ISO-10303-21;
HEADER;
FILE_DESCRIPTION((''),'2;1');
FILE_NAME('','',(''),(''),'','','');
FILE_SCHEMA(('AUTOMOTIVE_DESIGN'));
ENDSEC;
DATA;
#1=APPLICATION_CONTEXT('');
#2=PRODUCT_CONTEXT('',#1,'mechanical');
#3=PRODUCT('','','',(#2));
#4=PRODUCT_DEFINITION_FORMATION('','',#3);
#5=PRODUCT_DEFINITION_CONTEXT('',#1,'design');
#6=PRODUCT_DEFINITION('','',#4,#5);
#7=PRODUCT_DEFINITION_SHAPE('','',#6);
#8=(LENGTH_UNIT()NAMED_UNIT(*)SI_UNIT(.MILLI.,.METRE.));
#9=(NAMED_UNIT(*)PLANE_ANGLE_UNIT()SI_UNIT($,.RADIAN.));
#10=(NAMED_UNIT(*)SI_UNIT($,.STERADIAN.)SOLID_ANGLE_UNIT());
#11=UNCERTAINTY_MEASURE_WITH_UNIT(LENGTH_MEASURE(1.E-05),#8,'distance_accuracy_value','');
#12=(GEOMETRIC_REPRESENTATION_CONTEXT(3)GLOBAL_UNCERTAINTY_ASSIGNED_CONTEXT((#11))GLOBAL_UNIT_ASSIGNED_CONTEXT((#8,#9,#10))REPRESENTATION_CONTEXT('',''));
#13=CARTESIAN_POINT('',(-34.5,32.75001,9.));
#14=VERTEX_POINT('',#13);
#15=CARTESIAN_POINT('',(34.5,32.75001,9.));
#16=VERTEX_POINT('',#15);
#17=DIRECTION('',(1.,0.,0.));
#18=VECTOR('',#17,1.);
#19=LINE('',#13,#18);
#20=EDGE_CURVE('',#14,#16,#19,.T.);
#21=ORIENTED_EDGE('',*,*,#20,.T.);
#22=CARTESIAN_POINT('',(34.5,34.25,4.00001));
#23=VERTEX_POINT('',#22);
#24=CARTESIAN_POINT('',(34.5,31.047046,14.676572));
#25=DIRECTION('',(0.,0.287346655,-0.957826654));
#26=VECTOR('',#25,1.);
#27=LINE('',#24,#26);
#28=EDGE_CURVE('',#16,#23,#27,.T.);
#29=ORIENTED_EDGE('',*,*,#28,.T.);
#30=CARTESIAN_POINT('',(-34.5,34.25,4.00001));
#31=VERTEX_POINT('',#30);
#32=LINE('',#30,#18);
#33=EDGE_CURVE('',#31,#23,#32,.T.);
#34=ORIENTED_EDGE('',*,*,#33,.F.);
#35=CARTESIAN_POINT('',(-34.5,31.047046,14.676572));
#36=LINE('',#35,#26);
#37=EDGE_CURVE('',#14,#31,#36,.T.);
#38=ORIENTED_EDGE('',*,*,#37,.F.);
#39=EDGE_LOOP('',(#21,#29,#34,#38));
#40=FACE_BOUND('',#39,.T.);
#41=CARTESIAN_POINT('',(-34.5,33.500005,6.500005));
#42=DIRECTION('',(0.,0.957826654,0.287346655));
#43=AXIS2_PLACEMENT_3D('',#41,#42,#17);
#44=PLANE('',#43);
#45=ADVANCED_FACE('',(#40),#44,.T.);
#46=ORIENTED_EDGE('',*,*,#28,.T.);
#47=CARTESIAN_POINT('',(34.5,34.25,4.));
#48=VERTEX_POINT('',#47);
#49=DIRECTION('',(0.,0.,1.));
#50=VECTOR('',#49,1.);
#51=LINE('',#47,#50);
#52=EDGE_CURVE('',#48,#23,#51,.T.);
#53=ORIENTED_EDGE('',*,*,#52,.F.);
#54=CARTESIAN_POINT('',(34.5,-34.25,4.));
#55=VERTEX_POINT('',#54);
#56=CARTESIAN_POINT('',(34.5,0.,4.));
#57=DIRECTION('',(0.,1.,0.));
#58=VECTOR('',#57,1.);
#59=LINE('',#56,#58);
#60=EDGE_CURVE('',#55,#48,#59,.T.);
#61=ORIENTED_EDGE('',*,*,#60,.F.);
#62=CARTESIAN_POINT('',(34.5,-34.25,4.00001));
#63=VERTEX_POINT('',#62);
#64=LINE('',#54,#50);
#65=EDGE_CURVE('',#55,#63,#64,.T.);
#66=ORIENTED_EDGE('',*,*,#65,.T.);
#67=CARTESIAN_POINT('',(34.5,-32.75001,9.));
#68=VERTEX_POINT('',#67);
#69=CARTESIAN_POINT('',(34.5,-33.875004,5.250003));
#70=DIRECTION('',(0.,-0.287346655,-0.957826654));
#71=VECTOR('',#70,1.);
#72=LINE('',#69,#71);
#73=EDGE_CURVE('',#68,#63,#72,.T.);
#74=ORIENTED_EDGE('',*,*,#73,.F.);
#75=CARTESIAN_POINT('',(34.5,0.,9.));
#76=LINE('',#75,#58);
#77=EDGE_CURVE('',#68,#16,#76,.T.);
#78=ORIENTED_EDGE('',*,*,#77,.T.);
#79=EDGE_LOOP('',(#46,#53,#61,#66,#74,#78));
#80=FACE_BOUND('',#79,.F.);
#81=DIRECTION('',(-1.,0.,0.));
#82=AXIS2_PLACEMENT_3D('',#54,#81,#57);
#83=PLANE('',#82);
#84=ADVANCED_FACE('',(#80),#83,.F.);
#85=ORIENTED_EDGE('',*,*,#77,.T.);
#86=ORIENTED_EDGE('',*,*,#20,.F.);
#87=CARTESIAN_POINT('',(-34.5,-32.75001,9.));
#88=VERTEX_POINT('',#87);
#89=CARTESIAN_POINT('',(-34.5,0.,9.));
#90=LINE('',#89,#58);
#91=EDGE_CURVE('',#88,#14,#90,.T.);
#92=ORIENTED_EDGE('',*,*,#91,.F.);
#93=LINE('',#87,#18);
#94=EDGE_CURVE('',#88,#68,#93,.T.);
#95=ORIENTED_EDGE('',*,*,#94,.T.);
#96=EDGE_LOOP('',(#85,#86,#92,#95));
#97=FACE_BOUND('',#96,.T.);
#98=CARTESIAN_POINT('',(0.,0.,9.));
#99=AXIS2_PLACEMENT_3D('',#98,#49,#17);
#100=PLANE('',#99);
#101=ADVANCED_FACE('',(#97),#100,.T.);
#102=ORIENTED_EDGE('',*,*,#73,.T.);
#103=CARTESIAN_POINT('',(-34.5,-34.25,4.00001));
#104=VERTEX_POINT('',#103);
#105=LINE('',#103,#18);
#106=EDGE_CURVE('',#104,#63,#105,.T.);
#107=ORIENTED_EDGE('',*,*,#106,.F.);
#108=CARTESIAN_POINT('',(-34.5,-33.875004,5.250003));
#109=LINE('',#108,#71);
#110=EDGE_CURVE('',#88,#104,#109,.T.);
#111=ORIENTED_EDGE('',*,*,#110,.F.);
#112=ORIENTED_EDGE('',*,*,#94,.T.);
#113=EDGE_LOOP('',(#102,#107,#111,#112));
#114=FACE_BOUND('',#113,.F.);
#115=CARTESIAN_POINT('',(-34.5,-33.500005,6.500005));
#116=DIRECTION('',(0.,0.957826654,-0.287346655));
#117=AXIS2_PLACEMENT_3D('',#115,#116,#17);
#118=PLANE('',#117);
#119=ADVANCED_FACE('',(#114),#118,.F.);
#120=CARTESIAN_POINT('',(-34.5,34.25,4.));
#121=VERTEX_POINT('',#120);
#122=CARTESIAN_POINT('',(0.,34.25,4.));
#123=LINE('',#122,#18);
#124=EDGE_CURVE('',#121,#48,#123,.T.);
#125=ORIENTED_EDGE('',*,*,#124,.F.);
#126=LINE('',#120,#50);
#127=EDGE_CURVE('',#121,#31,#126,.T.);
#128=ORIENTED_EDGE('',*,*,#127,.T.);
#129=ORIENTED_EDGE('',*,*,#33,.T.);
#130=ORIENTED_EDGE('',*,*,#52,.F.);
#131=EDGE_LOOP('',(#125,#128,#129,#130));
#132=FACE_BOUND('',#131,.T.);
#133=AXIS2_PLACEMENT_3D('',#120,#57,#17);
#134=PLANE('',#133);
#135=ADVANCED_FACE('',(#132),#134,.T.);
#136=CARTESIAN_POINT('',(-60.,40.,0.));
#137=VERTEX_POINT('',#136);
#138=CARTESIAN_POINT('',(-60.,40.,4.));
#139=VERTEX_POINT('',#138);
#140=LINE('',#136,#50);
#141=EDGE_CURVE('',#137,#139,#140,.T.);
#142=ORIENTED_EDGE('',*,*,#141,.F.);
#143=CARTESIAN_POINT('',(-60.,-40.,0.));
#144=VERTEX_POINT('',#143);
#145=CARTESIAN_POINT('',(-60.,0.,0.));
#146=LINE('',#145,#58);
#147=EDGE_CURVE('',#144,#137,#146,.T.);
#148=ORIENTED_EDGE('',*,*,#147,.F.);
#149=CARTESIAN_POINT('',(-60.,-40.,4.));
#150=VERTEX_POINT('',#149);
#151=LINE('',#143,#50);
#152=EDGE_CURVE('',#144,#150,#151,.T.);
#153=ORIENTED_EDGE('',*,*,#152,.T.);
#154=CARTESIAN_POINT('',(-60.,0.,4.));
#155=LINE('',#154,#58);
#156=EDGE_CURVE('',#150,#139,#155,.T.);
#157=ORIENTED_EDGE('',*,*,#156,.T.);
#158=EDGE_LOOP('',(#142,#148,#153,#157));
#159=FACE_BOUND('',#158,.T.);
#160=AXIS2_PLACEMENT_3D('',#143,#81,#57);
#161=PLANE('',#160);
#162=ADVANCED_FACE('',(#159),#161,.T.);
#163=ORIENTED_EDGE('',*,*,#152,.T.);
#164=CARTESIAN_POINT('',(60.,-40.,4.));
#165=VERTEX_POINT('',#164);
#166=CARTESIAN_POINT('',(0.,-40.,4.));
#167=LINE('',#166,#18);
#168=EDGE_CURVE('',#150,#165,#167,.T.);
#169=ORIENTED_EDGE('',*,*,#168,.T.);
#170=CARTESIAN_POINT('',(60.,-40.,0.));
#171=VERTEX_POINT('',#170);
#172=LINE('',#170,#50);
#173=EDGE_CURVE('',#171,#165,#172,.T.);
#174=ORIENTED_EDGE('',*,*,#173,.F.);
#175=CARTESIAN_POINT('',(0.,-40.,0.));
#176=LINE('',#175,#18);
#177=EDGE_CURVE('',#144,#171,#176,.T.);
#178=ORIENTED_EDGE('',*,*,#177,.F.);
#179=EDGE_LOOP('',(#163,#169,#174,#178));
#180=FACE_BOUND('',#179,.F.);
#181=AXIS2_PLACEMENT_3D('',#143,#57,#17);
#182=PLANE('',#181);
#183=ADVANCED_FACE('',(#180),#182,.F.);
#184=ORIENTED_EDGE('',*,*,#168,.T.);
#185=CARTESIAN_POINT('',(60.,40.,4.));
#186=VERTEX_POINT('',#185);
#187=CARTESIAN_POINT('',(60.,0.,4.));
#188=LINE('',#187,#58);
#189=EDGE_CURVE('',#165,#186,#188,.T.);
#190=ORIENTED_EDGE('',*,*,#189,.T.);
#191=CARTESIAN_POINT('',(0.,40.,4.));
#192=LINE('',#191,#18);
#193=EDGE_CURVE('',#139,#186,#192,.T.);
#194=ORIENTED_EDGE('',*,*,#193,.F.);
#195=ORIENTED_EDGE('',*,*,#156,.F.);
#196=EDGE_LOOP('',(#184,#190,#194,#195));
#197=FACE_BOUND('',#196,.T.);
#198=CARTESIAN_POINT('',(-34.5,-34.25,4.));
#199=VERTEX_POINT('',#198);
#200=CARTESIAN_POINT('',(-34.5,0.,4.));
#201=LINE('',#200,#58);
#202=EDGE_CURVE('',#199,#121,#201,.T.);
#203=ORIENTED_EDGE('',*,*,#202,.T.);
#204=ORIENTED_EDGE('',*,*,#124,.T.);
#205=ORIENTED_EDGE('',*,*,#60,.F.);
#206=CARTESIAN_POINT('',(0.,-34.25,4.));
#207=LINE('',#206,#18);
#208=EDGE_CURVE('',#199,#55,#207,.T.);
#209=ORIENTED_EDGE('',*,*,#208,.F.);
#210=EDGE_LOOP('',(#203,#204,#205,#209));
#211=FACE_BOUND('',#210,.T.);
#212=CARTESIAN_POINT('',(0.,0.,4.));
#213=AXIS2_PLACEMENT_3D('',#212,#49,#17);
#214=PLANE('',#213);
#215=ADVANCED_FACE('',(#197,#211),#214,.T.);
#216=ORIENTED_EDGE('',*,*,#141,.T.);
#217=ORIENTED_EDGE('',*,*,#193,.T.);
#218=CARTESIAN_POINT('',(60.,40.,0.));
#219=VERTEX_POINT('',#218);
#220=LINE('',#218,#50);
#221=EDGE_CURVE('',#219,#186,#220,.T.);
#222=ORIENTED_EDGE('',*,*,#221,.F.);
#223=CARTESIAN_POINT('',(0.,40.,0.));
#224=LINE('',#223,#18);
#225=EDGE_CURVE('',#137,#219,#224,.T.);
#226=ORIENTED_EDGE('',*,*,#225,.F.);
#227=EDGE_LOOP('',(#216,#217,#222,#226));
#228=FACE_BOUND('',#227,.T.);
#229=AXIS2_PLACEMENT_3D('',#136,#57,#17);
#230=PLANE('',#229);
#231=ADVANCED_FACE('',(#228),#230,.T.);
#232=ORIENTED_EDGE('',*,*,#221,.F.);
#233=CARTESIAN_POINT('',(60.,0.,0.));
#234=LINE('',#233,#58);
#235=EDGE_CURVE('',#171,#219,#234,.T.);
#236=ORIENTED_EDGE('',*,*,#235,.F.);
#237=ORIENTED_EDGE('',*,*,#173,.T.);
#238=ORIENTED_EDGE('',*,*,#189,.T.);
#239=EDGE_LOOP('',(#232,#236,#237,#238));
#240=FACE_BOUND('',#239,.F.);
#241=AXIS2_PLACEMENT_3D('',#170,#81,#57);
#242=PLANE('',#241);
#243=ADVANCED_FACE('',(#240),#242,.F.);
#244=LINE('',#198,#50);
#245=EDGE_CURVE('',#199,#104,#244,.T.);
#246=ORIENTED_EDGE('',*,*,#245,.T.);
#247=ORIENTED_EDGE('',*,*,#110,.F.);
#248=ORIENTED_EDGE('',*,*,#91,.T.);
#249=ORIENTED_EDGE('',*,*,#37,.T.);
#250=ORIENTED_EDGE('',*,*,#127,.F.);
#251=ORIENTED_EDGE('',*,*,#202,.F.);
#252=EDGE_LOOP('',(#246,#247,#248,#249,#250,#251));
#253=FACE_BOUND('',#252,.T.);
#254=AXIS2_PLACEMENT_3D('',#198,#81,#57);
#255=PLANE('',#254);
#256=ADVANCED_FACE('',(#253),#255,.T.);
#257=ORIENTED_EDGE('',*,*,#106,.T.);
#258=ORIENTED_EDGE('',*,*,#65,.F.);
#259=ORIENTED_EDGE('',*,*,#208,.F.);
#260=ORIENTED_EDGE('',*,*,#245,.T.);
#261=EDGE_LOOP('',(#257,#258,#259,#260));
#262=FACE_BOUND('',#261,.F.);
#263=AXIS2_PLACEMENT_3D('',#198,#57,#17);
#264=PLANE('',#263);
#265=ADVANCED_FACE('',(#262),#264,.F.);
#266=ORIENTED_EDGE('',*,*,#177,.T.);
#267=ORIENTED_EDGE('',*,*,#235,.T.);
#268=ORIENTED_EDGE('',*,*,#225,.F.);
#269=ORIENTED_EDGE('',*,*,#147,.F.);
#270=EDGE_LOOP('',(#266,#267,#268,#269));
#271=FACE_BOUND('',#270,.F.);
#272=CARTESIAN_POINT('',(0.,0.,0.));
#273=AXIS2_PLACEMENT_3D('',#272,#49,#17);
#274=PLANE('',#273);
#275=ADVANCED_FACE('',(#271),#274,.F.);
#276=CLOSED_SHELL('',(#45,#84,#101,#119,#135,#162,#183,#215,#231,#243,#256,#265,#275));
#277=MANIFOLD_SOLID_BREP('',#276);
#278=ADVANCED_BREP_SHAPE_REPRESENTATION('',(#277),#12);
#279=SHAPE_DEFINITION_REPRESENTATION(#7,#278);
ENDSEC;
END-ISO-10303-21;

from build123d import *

# Parameters (mm, degrees)
F0_W     = 120
F0_H     = 80
F1_DEPTH = 4
F2_W     = 69
F2_H     = 68.5
F3_DEPTH = 5
F4_SIZE2 = 4.99999
F4_SIZE  = 1.49999


# Not quite as in the source:
# - a fillet or chamfer is up to 0.001 mm smaller than in the source, because OpenCascade refuses the exact size


with BuildPart() as f1:
    # F0 (on Top) → F1 (new body)
    with BuildSketch(Plane.XY):
        Rectangle(F0_W, F0_H)
    extrude(amount=F1_DEPTH)

    # F2 (on face) → F3 (join)
    with BuildSketch(Plane.XY.offset(4)):
        Rectangle(F2_W, F2_H)
    extrude(amount=F3_DEPTH)

    # F4 (size 1.5 and 5 in the source; OpenCascade refuses exactly that, so slightly less here)
    f4_edges = [f1.edges().sort_by_distance(p)[0] for p in [
        (0, 34.25, 9),
        (0, -34.25, 9),
    ]]
    f4_side = f1.faces().sort_by_distance((0, 0, 9))[0]
    chamfer(f4_edges, length=F4_SIZE, length2=F4_SIZE2, reference=f4_side)


solid = f1.part
